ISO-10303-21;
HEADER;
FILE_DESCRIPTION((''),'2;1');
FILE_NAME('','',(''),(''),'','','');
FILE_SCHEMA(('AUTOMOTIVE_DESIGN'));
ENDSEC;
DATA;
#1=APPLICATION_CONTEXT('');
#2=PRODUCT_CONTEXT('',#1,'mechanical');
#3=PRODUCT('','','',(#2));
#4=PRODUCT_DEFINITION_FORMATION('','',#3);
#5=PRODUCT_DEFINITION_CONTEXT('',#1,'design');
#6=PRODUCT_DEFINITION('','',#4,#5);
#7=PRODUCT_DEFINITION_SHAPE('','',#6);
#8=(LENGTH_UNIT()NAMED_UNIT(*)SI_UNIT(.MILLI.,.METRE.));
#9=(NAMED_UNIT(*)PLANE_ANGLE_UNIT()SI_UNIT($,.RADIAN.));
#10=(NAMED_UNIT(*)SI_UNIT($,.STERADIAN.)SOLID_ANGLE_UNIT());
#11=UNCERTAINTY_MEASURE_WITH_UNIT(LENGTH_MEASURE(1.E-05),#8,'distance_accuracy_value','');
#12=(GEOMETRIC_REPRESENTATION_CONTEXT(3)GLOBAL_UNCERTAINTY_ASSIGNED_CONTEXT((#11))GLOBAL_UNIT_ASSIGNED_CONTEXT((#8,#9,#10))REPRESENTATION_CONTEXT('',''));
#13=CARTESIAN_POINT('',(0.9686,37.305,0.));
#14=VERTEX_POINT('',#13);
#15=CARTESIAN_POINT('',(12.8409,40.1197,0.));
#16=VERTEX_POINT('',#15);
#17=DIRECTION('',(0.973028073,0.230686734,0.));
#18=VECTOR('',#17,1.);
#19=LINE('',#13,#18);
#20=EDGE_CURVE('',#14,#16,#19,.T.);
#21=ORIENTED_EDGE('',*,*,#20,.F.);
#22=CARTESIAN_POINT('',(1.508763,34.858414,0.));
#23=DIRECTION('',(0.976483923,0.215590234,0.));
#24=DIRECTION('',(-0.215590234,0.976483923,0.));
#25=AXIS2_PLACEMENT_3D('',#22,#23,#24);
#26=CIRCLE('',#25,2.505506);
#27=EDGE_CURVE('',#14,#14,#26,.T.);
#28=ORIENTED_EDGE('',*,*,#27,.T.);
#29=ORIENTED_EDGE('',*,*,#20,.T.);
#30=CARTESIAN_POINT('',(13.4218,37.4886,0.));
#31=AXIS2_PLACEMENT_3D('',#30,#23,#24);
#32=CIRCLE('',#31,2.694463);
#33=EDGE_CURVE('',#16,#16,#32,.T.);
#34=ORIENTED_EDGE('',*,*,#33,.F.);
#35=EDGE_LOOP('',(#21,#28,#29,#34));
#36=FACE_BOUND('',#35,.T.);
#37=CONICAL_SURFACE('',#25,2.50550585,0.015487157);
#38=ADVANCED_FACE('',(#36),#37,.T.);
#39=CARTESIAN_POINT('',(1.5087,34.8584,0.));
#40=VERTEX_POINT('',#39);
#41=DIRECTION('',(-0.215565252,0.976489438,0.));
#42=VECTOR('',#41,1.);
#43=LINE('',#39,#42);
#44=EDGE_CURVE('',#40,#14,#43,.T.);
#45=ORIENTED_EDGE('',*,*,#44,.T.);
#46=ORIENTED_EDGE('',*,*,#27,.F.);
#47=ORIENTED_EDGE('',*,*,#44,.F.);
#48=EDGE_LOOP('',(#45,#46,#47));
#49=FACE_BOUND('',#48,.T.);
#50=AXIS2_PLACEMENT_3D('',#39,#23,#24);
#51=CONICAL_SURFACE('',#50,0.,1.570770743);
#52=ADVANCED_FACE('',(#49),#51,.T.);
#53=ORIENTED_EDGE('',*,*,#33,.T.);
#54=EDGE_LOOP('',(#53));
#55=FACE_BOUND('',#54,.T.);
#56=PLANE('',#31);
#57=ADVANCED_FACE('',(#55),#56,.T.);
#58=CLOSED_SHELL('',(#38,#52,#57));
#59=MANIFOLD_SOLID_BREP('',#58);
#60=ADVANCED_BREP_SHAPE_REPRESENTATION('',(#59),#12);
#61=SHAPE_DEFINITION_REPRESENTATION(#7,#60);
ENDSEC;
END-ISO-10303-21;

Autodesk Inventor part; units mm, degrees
sketch "Sketch_1" plane through (0, 0, 0) normal (0, 0, 1) x (1, 0, 0)
  line L0 (13.4218, 37.4886) -> (1.5087, 34.8584)
  line L1 (1.5087, 34.8584) -> (0.9686, 37.305)
  line L2 (0.9686, 37.305) -> (12.8409, 40.1197)
  line L3 (12.8409, 40.1197) -> (13.4218, 37.4886)
  line L4 (13.4218, 37.4886) -> (1.5087, 34.8584)
revolve "Revolution1" add sketch "Sketch_1" angle 360 about axis through (13.4218, 37.4886, 0) along (0.9764845, 0.2155876, 0)
ref_plane "roller_XY" through (0, 36.1735, 0) normal (-1, 0, 0) x (0, 0, -1)
ref_plane "roller_YZ" through (0, 36.1735, 0) normal (0, 0, -1) x (0, -1, 0)
ref_plane "roller_ZX" through (0, 36.1735, 0) normal (0, -1, 0) x (-1, 0, 0)
properties part number "32912_roller"
